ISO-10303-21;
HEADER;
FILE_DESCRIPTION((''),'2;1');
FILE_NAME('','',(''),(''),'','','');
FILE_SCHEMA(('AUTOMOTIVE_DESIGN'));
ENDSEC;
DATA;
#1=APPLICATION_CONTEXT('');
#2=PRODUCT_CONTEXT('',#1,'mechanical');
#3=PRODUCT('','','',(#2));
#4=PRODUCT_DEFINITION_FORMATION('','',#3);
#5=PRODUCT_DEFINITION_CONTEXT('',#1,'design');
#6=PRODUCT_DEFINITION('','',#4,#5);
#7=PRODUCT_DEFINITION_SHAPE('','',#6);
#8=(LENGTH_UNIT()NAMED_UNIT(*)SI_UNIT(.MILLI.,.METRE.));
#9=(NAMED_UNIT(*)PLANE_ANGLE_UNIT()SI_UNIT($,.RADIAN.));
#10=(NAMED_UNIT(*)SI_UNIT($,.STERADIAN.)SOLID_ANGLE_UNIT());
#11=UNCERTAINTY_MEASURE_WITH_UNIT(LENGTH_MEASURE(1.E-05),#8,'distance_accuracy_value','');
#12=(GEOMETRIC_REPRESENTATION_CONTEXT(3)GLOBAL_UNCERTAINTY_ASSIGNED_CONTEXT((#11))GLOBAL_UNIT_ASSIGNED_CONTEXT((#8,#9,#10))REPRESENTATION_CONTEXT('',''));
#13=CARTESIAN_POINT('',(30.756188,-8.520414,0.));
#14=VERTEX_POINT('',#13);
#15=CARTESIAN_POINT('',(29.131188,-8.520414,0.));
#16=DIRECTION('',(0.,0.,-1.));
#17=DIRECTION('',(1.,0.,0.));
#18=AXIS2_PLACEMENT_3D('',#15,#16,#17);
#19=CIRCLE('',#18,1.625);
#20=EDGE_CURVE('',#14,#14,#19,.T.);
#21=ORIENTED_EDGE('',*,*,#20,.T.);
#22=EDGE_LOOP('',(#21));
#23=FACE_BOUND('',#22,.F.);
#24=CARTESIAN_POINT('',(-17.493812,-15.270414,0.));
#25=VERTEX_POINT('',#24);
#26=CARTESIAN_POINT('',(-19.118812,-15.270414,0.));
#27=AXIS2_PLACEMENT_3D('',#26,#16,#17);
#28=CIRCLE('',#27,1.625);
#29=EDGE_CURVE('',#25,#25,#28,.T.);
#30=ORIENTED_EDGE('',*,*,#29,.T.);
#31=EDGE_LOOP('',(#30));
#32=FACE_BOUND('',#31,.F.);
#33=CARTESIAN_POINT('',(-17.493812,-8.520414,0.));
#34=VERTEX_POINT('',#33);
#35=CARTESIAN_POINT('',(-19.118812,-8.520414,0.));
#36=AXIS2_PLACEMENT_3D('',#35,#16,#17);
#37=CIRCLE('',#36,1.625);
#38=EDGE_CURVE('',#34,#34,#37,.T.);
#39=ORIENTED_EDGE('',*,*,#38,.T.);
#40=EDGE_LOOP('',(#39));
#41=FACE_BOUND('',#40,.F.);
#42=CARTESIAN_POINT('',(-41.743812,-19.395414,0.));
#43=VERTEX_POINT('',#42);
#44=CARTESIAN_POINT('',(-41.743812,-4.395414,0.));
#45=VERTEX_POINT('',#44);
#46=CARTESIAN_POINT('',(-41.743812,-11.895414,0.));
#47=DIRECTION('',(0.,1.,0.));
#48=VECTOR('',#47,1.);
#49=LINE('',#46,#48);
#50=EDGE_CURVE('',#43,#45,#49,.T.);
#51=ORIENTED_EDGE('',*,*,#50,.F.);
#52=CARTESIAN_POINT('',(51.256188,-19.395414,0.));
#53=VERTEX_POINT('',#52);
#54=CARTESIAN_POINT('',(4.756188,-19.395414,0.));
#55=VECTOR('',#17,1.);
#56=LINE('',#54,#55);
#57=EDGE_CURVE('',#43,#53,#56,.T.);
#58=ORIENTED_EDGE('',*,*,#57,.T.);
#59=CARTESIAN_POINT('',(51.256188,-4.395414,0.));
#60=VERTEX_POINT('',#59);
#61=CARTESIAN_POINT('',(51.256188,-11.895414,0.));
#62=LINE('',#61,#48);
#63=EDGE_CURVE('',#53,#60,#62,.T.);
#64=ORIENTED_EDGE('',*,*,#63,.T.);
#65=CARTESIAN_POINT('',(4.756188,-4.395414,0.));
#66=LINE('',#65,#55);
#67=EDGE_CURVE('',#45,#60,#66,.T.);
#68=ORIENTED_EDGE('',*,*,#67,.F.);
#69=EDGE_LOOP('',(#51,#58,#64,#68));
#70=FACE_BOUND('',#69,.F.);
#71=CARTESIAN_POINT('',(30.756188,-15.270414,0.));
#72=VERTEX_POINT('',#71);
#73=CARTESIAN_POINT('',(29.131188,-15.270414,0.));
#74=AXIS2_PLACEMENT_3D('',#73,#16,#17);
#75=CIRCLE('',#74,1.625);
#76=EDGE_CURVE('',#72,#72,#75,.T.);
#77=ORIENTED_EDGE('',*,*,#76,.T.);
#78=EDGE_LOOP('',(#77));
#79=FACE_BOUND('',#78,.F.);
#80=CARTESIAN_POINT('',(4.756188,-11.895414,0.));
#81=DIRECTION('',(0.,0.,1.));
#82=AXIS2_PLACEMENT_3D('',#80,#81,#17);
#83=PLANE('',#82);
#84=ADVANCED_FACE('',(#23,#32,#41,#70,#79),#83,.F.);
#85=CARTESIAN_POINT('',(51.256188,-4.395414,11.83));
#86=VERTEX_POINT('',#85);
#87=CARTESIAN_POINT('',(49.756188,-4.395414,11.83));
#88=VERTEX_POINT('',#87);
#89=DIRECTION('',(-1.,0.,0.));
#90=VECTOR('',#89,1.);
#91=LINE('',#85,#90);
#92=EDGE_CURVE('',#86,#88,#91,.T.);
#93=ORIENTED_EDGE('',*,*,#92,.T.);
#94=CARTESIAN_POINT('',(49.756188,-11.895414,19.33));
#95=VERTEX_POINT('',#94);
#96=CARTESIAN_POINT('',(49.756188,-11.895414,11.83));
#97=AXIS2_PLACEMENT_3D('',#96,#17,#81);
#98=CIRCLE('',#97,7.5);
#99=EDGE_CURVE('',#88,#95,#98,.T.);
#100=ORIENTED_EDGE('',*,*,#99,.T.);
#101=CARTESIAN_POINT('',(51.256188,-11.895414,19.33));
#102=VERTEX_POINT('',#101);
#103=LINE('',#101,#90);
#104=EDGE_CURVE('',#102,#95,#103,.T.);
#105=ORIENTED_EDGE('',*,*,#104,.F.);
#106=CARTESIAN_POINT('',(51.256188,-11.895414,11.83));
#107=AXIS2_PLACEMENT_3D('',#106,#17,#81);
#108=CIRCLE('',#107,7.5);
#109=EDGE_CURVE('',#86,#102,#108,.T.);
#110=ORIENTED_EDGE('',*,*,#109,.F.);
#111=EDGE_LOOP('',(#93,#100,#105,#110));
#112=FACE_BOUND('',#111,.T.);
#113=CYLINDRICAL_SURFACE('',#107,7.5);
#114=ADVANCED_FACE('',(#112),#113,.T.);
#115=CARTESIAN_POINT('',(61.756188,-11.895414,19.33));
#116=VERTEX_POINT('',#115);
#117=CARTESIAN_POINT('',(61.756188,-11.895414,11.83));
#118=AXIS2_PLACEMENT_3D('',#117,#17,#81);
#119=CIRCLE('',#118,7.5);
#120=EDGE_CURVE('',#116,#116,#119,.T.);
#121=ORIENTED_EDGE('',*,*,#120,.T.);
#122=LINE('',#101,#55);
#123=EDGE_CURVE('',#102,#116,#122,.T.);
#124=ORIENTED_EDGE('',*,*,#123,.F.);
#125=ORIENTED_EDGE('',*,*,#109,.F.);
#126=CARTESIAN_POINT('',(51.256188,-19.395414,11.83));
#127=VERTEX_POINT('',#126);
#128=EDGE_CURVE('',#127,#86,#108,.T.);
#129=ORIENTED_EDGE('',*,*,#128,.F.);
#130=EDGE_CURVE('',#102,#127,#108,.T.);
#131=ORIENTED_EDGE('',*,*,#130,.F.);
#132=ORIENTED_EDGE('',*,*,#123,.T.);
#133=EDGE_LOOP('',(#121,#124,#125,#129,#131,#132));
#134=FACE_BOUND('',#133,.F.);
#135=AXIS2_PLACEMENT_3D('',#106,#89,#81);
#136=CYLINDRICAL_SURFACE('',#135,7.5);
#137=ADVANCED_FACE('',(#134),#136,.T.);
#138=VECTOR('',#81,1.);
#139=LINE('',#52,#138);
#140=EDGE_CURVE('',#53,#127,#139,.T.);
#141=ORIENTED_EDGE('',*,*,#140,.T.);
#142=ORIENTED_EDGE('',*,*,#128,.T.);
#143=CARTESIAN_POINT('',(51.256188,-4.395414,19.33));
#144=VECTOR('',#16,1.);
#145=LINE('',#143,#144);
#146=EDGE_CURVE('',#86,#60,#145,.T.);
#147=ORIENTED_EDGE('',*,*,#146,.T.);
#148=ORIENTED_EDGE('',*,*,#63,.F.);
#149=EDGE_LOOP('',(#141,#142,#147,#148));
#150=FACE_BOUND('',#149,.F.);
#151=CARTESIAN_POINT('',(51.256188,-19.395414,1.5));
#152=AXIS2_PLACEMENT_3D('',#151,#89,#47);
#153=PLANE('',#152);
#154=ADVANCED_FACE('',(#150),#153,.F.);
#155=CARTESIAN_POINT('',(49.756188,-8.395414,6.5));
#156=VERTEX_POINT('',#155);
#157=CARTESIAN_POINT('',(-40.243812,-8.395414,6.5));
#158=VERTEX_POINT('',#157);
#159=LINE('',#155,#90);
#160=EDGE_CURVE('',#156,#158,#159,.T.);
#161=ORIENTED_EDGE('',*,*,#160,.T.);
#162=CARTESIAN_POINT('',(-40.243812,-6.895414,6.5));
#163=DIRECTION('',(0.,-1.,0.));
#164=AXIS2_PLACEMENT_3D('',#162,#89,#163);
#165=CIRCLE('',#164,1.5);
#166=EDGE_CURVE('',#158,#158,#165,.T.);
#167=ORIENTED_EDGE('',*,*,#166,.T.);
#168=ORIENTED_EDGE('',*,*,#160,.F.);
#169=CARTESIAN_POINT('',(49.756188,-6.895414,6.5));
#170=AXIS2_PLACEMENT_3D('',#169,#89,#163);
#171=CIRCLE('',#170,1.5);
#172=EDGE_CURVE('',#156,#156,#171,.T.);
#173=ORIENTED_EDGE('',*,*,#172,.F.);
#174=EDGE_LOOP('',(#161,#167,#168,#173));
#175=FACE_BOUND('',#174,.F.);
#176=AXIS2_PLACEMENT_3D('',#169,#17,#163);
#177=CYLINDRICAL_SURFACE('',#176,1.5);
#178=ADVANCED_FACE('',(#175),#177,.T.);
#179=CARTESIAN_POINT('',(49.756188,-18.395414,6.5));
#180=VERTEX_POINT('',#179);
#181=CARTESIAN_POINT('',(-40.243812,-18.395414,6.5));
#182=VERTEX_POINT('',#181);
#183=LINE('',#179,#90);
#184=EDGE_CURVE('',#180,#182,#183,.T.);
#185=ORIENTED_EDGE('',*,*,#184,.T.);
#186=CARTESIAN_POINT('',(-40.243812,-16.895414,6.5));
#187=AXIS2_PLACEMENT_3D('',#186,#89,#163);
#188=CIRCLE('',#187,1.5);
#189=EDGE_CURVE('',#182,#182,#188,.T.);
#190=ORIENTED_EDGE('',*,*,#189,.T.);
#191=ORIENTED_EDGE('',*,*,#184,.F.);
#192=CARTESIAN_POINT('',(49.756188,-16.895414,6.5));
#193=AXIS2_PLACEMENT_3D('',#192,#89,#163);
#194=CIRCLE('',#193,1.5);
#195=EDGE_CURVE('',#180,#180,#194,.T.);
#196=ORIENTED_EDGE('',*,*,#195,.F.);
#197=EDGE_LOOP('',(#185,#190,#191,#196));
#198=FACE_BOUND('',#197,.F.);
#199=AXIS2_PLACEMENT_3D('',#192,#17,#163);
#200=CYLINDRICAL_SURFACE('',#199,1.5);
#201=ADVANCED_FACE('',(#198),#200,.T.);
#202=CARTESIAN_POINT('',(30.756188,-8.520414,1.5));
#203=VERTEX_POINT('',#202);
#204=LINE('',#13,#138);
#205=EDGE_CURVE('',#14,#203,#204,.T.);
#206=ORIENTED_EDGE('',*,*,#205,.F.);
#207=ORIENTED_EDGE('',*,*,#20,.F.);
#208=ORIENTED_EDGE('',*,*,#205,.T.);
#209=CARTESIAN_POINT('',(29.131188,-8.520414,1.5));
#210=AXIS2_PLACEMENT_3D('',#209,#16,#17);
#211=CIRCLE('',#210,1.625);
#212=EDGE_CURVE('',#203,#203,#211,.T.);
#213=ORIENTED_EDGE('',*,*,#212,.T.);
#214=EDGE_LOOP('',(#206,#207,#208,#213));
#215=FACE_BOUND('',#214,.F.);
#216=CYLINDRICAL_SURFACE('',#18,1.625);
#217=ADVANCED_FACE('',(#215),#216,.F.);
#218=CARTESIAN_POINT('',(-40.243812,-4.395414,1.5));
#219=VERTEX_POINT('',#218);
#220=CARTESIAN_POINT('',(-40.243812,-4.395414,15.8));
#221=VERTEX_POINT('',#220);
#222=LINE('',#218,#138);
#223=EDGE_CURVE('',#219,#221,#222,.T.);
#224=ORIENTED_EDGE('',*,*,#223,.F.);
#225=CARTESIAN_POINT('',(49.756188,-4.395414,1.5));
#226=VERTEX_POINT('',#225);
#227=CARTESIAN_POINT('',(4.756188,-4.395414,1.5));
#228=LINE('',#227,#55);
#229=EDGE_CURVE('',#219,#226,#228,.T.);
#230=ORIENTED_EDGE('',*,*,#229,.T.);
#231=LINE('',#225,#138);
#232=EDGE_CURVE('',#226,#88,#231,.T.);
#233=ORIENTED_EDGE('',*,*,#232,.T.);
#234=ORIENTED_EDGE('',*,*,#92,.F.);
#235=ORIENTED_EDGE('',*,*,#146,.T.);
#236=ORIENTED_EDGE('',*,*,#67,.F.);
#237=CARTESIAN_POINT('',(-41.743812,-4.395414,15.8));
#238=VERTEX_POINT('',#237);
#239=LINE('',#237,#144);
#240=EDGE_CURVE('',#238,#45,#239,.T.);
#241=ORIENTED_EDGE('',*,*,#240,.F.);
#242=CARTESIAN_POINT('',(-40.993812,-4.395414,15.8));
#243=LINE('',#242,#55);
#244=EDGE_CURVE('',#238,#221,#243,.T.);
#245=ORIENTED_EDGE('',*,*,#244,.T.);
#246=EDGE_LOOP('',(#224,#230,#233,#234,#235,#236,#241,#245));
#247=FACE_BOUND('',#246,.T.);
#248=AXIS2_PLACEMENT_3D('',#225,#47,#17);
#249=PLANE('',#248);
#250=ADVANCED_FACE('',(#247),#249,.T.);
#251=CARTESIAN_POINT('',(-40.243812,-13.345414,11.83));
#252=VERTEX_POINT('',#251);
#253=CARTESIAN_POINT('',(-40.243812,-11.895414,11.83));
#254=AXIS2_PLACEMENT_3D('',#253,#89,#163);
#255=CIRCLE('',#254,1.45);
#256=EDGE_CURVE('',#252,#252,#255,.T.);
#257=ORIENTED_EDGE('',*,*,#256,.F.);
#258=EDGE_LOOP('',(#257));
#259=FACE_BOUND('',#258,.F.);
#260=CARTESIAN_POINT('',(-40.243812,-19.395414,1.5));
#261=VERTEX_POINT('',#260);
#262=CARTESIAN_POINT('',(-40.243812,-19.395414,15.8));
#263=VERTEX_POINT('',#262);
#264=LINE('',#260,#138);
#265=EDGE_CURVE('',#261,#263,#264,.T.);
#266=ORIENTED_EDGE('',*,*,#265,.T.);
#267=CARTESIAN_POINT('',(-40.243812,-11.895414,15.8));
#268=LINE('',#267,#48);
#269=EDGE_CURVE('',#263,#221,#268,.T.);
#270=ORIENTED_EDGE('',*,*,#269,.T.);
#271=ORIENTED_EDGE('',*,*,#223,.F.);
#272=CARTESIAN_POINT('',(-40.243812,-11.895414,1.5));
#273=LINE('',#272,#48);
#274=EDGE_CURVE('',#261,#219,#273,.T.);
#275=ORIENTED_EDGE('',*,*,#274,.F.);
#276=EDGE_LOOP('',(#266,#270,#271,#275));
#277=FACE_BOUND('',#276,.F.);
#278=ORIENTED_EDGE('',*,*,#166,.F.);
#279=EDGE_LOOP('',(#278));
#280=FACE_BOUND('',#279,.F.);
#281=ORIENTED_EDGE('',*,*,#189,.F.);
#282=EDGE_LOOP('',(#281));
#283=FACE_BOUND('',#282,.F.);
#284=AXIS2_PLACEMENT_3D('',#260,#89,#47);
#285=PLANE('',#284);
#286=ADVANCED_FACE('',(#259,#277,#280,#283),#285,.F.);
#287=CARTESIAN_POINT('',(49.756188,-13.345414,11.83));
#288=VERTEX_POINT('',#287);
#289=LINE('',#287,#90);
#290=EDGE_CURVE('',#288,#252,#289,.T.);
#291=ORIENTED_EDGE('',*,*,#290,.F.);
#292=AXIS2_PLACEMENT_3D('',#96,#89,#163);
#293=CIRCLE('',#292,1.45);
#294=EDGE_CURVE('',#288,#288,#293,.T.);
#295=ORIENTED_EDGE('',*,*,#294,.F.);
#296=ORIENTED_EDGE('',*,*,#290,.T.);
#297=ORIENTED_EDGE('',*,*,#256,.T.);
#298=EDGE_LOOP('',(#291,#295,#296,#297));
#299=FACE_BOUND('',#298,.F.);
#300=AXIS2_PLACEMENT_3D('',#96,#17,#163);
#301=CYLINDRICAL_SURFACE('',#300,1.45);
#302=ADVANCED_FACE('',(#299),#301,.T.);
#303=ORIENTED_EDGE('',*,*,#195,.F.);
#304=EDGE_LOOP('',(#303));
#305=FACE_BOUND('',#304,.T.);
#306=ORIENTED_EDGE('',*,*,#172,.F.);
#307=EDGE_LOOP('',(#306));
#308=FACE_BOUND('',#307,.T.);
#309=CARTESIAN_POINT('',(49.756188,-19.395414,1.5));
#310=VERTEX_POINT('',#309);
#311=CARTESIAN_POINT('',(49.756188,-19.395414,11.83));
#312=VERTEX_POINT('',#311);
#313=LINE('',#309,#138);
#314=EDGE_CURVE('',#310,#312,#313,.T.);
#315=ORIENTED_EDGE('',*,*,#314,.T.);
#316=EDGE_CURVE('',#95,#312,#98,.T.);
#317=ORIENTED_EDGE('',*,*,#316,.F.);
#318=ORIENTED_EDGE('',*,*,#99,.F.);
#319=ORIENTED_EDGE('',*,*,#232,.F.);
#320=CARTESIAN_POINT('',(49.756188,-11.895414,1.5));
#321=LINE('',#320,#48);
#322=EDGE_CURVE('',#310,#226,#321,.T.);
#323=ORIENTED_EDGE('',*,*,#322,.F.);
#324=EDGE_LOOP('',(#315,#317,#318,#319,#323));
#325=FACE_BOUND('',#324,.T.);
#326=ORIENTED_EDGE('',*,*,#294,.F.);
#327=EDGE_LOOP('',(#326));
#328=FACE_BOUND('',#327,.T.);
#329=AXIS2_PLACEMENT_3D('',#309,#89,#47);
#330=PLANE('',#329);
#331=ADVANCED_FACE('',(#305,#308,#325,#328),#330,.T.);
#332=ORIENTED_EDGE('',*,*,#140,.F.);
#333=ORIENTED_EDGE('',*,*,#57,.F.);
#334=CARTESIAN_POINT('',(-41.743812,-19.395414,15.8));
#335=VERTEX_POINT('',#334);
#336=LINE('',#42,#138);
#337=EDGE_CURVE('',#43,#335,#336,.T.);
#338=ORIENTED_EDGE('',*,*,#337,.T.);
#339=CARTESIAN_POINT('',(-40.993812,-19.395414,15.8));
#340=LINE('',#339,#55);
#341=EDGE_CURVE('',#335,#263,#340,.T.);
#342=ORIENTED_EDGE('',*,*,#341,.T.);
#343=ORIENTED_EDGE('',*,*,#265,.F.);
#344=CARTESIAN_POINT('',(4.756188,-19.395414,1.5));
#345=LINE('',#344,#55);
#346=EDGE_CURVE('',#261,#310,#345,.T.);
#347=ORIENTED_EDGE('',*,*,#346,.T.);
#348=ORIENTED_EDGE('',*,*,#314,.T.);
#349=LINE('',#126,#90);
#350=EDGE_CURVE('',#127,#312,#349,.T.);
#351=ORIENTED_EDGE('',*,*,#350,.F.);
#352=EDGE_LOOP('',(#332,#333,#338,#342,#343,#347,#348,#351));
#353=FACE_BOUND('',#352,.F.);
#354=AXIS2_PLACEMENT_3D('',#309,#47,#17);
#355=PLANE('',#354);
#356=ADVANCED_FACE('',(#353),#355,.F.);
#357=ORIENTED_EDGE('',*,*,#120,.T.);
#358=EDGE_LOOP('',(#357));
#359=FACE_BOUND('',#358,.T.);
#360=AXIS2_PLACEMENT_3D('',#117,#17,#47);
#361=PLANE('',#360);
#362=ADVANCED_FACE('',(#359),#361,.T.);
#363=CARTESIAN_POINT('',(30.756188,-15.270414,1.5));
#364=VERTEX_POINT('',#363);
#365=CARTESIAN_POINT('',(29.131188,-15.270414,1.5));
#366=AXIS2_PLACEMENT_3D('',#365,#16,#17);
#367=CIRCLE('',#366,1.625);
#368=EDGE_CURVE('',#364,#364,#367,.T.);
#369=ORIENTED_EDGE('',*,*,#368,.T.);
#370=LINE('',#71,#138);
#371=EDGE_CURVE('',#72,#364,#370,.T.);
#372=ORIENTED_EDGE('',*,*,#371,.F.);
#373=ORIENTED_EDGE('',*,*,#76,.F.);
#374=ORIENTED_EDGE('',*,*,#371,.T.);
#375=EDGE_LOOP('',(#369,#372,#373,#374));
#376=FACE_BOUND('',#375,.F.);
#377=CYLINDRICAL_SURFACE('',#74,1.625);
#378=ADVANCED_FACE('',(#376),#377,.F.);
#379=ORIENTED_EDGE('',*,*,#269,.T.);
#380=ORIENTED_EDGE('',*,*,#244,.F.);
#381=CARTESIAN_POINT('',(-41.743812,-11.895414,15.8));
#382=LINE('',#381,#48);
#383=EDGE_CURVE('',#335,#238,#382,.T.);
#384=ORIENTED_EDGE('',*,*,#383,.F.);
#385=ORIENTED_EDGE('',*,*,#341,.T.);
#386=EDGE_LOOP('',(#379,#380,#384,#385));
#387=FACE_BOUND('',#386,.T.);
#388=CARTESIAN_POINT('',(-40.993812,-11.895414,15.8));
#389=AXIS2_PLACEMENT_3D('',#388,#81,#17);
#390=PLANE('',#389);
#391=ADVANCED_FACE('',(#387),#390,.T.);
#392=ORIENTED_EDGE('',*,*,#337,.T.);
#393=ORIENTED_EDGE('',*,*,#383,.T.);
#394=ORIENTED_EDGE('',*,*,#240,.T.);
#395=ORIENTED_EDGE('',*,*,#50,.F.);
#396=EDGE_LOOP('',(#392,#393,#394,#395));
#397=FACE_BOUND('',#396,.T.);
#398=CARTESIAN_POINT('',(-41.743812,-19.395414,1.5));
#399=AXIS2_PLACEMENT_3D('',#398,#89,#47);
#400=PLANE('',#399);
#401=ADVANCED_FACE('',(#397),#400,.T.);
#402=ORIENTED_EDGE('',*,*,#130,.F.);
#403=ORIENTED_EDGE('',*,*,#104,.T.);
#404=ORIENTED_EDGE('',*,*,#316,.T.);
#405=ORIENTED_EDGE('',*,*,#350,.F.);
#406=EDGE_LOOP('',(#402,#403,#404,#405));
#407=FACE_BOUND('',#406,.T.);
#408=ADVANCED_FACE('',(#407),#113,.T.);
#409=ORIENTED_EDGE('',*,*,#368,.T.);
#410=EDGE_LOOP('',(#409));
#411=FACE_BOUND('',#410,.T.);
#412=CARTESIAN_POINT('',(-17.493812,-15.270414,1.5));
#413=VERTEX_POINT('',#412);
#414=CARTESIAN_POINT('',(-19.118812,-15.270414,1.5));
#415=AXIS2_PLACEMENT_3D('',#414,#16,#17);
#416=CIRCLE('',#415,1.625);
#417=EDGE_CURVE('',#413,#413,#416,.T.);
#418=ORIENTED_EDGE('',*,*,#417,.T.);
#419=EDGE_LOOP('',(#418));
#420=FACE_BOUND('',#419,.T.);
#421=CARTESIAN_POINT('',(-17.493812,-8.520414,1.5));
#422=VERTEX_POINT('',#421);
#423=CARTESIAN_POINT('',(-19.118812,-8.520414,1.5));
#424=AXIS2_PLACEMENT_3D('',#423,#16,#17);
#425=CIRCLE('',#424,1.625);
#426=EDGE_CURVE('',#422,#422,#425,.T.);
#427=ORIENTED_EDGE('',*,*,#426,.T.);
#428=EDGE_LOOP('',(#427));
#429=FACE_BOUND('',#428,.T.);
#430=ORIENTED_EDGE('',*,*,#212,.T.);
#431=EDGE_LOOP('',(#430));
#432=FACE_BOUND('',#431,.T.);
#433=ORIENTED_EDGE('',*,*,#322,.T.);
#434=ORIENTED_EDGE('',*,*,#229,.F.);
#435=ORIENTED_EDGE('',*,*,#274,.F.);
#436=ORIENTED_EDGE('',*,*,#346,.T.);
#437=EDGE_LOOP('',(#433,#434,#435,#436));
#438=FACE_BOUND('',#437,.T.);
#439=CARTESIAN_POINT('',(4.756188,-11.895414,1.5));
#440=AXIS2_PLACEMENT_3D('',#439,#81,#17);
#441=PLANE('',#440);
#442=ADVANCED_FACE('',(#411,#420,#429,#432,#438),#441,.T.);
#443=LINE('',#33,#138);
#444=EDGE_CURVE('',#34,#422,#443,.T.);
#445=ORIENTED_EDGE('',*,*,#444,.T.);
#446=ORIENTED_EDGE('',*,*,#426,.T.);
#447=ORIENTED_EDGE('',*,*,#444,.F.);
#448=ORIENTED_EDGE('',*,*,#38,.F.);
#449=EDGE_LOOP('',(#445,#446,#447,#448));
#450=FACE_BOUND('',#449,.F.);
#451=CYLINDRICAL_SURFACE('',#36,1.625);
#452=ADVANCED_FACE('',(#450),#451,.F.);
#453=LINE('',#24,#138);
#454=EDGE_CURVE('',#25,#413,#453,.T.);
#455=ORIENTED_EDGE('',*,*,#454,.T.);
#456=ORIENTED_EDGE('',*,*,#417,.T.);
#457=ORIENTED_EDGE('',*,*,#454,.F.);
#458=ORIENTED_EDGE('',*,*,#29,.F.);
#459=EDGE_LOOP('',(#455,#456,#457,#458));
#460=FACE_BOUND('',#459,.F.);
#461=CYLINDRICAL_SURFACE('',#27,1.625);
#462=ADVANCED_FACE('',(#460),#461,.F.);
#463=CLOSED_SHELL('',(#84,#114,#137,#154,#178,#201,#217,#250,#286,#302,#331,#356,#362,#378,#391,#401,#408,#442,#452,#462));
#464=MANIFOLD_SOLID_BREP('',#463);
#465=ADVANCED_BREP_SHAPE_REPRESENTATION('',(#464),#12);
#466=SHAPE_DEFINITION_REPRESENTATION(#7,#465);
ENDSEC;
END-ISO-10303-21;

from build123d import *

# Parameters (mm, degrees)
F0_W      = 93
F0_H      = 15
F1_DEPTH  = 1.5
F2_W      = 1.5
F2_H      = 15
F3_DEPTH  = 14.3
F4_DEPTH  = 17.83
F6_DEPTH  = 10.5
F7_DEPTH  = 1.5
F8_R      = 1.5
F8_R_2    = 1.45
F9_DEPTH  = 90
F10_R     = 1.625
F11_DEPTH = 1.5


with BuildPart() as f1:
    # F0 (on Top) → F1 (new body)
    with BuildSketch(Plane.XY):
        with Locations((4.7561880201, -11.8954138505)):
            Rectangle(F0_W, F0_H)
    extrude(amount=F1_DEPTH)

    # F2 (on face) → F3 (join)
    with BuildSketch(Plane.XY.offset(1.5)):
        with Locations((-40.9938119799, -11.8954138505)):
            Rectangle(F2_W, F2_H)
    extrude(amount=F3_DEPTH)

    # F2 (on face) → F4 (join)
    with BuildSketch(Plane.XY.offset(1.5)):
        with Locations((50.5061880201, -11.8954138505)):
            Rectangle(F2_W, F2_H)
    extrude(amount=F4_DEPTH)

    # F5 (on face) → F6 (join)
    with BuildSketch(Plane.YZ.offset(51.2561880201)):
        with BuildLine():
            ThreePointArc((-19.3954138505, 11.83), (-11.8954138505, 4.33), (-4.3954138505, 11.83))
            ThreePointArc((-4.3954138505, 11.83), (-6.5921129916, 17.1333008589), (-11.8954138505, 19.33))
            ThreePointArc((-11.8954138505, 19.33), (-17.1987147094, 17.1333008589), (-19.3954138505, 11.83))
        make_face()
    extrude(amount=F6_DEPTH)

    # F7 (cut, through all): faces of the model
    f7_faces = [f1.faces().sort_by_distance(p)[0] for p in [
        (51.2561880201, -6.0706733926, 17.6547404579),
        (51.2561880201, -17.7201543084, 17.6547404579),
    ]]
    extrude(f7_faces, amount=-F7_DEPTH, mode=Mode.SUBTRACT)

    # F8 (on face) → F9 (join, through all)
    with BuildSketch(Plane(origin=(49.7561880201, 0, 0), x_dir=(0, -1, 0), z_dir=(-1, 0, 0))):
        with Locations((6.8954138505, 6.5)):
            Circle(F8_R)
        with Locations((11.8954138505, 11.83)):
            Circle(F8_R_2)
        with Locations((16.8954138505, 6.5)):
            Circle(F8_R)
    extrude(amount=F9_DEPTH)

    # F10 (on face) → F11 (cut, through all)
    with BuildSketch(Plane(origin=(0, 0, 0), x_dir=(1, 0, 0), z_dir=(0, 0, -1))):
        with Locations((-19.1188119799, 15.2704138505)):
            Circle(F10_R)
        with Locations((-19.1188119799, 8.5204138505)):
            Circle(F10_R)
        with Locations((29.1311880201, 8.5204138505)):
            Circle(F10_R)
        with Locations((29.1311880201, 15.2704138505)):
            Circle(F10_R)
    extrude(amount=-F11_DEPTH, mode=Mode.SUBTRACT)


solid = f1.part
